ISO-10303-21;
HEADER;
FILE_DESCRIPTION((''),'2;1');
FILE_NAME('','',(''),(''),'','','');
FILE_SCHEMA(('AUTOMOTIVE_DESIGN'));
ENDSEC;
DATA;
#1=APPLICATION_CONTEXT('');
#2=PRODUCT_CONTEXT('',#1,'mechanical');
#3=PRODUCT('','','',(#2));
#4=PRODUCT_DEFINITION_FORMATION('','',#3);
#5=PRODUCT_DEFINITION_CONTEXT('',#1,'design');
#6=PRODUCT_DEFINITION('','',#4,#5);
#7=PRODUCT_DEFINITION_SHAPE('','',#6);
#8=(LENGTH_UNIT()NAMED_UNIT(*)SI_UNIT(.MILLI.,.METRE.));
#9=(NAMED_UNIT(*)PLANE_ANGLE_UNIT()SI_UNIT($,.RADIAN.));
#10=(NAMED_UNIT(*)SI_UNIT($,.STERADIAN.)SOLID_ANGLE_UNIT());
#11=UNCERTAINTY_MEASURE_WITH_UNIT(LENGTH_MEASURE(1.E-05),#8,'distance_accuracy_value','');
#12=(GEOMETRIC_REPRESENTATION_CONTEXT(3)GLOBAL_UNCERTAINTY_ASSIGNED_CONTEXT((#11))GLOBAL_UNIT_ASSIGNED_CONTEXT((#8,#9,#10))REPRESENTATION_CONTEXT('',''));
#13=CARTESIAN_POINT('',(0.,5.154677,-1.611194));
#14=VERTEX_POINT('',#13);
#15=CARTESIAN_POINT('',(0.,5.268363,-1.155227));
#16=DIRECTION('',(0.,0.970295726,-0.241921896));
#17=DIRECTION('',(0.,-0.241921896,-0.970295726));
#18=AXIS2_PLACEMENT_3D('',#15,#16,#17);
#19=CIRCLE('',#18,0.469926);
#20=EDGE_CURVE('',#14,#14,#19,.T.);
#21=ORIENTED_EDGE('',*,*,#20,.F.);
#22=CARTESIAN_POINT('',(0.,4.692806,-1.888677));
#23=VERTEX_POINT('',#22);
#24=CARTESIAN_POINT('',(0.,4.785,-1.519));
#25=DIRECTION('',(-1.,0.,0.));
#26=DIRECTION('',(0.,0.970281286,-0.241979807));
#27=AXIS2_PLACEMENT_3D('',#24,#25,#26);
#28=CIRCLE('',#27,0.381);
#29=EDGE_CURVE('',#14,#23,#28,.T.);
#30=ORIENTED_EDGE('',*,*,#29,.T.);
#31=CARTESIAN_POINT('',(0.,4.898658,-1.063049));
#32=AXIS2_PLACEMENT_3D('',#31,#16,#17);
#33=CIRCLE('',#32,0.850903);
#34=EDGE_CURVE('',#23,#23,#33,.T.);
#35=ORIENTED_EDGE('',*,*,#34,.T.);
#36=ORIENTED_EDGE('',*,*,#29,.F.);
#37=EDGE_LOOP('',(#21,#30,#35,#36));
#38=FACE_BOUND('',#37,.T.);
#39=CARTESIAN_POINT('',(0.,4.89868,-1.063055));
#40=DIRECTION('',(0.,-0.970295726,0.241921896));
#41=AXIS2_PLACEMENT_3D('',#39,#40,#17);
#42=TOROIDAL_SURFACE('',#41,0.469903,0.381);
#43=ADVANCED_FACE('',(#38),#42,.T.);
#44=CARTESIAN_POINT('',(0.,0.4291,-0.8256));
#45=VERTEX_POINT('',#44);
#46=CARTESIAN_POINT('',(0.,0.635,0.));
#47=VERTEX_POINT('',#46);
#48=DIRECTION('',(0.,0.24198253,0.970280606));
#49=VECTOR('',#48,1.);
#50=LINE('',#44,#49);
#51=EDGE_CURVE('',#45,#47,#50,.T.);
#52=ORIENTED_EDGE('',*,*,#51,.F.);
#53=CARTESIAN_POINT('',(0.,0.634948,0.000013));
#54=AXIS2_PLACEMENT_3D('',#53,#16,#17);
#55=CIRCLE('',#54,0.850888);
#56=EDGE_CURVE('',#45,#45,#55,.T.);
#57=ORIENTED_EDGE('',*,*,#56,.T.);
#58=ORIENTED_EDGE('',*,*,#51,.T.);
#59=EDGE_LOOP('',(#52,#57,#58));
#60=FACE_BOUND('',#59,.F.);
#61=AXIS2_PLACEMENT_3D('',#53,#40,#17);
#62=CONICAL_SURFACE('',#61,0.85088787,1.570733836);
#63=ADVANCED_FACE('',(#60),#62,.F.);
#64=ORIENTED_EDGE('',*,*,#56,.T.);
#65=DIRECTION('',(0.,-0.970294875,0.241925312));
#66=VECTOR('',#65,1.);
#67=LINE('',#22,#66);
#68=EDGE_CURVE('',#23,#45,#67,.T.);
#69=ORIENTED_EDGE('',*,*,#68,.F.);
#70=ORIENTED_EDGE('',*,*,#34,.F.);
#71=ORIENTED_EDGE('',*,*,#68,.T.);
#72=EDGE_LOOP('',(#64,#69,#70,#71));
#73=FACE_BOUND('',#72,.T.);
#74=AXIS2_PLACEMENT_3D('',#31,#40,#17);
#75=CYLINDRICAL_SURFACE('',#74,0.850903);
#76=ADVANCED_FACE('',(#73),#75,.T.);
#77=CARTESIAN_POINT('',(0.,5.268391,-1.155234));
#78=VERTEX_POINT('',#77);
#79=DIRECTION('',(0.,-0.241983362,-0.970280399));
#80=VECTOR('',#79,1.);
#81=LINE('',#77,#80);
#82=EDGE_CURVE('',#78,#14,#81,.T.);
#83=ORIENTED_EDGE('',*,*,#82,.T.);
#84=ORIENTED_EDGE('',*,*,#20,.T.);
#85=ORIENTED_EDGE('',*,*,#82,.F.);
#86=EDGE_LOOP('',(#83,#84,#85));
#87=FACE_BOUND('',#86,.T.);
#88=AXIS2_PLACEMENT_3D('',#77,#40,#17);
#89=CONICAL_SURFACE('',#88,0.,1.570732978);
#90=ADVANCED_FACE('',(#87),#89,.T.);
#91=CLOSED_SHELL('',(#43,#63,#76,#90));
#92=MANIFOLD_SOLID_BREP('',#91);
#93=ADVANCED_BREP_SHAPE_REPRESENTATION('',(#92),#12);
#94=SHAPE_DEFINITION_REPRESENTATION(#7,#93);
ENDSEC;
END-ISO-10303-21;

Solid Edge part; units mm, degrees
sketch "Sketch1" plane through (0, 0, 0) normal (1, 0, 0) x (0, 1, 0)
  line L0 (5.2684, -1.1552) -> (5.1547, -1.6112)
  arc A0 (5.1547, -1.6112) -> (4.6928, -1.8887) centre (4.785, -1.519) cw
  line L1 (4.6928, -1.8887) -> (0.4291, -0.8256)
  line L2 (0.4291, -0.8256) -> (0.635, 0)
  line L3 (0.635, 0) -> (5.2684, -1.1552)
revolve "RevolvedProtrusion1" add sketch "Sketch1" angle 360 about axis through (0, 0.635, 0) along (0, 0.9702957, -0.2419219)
properties part number "G-actuator"
